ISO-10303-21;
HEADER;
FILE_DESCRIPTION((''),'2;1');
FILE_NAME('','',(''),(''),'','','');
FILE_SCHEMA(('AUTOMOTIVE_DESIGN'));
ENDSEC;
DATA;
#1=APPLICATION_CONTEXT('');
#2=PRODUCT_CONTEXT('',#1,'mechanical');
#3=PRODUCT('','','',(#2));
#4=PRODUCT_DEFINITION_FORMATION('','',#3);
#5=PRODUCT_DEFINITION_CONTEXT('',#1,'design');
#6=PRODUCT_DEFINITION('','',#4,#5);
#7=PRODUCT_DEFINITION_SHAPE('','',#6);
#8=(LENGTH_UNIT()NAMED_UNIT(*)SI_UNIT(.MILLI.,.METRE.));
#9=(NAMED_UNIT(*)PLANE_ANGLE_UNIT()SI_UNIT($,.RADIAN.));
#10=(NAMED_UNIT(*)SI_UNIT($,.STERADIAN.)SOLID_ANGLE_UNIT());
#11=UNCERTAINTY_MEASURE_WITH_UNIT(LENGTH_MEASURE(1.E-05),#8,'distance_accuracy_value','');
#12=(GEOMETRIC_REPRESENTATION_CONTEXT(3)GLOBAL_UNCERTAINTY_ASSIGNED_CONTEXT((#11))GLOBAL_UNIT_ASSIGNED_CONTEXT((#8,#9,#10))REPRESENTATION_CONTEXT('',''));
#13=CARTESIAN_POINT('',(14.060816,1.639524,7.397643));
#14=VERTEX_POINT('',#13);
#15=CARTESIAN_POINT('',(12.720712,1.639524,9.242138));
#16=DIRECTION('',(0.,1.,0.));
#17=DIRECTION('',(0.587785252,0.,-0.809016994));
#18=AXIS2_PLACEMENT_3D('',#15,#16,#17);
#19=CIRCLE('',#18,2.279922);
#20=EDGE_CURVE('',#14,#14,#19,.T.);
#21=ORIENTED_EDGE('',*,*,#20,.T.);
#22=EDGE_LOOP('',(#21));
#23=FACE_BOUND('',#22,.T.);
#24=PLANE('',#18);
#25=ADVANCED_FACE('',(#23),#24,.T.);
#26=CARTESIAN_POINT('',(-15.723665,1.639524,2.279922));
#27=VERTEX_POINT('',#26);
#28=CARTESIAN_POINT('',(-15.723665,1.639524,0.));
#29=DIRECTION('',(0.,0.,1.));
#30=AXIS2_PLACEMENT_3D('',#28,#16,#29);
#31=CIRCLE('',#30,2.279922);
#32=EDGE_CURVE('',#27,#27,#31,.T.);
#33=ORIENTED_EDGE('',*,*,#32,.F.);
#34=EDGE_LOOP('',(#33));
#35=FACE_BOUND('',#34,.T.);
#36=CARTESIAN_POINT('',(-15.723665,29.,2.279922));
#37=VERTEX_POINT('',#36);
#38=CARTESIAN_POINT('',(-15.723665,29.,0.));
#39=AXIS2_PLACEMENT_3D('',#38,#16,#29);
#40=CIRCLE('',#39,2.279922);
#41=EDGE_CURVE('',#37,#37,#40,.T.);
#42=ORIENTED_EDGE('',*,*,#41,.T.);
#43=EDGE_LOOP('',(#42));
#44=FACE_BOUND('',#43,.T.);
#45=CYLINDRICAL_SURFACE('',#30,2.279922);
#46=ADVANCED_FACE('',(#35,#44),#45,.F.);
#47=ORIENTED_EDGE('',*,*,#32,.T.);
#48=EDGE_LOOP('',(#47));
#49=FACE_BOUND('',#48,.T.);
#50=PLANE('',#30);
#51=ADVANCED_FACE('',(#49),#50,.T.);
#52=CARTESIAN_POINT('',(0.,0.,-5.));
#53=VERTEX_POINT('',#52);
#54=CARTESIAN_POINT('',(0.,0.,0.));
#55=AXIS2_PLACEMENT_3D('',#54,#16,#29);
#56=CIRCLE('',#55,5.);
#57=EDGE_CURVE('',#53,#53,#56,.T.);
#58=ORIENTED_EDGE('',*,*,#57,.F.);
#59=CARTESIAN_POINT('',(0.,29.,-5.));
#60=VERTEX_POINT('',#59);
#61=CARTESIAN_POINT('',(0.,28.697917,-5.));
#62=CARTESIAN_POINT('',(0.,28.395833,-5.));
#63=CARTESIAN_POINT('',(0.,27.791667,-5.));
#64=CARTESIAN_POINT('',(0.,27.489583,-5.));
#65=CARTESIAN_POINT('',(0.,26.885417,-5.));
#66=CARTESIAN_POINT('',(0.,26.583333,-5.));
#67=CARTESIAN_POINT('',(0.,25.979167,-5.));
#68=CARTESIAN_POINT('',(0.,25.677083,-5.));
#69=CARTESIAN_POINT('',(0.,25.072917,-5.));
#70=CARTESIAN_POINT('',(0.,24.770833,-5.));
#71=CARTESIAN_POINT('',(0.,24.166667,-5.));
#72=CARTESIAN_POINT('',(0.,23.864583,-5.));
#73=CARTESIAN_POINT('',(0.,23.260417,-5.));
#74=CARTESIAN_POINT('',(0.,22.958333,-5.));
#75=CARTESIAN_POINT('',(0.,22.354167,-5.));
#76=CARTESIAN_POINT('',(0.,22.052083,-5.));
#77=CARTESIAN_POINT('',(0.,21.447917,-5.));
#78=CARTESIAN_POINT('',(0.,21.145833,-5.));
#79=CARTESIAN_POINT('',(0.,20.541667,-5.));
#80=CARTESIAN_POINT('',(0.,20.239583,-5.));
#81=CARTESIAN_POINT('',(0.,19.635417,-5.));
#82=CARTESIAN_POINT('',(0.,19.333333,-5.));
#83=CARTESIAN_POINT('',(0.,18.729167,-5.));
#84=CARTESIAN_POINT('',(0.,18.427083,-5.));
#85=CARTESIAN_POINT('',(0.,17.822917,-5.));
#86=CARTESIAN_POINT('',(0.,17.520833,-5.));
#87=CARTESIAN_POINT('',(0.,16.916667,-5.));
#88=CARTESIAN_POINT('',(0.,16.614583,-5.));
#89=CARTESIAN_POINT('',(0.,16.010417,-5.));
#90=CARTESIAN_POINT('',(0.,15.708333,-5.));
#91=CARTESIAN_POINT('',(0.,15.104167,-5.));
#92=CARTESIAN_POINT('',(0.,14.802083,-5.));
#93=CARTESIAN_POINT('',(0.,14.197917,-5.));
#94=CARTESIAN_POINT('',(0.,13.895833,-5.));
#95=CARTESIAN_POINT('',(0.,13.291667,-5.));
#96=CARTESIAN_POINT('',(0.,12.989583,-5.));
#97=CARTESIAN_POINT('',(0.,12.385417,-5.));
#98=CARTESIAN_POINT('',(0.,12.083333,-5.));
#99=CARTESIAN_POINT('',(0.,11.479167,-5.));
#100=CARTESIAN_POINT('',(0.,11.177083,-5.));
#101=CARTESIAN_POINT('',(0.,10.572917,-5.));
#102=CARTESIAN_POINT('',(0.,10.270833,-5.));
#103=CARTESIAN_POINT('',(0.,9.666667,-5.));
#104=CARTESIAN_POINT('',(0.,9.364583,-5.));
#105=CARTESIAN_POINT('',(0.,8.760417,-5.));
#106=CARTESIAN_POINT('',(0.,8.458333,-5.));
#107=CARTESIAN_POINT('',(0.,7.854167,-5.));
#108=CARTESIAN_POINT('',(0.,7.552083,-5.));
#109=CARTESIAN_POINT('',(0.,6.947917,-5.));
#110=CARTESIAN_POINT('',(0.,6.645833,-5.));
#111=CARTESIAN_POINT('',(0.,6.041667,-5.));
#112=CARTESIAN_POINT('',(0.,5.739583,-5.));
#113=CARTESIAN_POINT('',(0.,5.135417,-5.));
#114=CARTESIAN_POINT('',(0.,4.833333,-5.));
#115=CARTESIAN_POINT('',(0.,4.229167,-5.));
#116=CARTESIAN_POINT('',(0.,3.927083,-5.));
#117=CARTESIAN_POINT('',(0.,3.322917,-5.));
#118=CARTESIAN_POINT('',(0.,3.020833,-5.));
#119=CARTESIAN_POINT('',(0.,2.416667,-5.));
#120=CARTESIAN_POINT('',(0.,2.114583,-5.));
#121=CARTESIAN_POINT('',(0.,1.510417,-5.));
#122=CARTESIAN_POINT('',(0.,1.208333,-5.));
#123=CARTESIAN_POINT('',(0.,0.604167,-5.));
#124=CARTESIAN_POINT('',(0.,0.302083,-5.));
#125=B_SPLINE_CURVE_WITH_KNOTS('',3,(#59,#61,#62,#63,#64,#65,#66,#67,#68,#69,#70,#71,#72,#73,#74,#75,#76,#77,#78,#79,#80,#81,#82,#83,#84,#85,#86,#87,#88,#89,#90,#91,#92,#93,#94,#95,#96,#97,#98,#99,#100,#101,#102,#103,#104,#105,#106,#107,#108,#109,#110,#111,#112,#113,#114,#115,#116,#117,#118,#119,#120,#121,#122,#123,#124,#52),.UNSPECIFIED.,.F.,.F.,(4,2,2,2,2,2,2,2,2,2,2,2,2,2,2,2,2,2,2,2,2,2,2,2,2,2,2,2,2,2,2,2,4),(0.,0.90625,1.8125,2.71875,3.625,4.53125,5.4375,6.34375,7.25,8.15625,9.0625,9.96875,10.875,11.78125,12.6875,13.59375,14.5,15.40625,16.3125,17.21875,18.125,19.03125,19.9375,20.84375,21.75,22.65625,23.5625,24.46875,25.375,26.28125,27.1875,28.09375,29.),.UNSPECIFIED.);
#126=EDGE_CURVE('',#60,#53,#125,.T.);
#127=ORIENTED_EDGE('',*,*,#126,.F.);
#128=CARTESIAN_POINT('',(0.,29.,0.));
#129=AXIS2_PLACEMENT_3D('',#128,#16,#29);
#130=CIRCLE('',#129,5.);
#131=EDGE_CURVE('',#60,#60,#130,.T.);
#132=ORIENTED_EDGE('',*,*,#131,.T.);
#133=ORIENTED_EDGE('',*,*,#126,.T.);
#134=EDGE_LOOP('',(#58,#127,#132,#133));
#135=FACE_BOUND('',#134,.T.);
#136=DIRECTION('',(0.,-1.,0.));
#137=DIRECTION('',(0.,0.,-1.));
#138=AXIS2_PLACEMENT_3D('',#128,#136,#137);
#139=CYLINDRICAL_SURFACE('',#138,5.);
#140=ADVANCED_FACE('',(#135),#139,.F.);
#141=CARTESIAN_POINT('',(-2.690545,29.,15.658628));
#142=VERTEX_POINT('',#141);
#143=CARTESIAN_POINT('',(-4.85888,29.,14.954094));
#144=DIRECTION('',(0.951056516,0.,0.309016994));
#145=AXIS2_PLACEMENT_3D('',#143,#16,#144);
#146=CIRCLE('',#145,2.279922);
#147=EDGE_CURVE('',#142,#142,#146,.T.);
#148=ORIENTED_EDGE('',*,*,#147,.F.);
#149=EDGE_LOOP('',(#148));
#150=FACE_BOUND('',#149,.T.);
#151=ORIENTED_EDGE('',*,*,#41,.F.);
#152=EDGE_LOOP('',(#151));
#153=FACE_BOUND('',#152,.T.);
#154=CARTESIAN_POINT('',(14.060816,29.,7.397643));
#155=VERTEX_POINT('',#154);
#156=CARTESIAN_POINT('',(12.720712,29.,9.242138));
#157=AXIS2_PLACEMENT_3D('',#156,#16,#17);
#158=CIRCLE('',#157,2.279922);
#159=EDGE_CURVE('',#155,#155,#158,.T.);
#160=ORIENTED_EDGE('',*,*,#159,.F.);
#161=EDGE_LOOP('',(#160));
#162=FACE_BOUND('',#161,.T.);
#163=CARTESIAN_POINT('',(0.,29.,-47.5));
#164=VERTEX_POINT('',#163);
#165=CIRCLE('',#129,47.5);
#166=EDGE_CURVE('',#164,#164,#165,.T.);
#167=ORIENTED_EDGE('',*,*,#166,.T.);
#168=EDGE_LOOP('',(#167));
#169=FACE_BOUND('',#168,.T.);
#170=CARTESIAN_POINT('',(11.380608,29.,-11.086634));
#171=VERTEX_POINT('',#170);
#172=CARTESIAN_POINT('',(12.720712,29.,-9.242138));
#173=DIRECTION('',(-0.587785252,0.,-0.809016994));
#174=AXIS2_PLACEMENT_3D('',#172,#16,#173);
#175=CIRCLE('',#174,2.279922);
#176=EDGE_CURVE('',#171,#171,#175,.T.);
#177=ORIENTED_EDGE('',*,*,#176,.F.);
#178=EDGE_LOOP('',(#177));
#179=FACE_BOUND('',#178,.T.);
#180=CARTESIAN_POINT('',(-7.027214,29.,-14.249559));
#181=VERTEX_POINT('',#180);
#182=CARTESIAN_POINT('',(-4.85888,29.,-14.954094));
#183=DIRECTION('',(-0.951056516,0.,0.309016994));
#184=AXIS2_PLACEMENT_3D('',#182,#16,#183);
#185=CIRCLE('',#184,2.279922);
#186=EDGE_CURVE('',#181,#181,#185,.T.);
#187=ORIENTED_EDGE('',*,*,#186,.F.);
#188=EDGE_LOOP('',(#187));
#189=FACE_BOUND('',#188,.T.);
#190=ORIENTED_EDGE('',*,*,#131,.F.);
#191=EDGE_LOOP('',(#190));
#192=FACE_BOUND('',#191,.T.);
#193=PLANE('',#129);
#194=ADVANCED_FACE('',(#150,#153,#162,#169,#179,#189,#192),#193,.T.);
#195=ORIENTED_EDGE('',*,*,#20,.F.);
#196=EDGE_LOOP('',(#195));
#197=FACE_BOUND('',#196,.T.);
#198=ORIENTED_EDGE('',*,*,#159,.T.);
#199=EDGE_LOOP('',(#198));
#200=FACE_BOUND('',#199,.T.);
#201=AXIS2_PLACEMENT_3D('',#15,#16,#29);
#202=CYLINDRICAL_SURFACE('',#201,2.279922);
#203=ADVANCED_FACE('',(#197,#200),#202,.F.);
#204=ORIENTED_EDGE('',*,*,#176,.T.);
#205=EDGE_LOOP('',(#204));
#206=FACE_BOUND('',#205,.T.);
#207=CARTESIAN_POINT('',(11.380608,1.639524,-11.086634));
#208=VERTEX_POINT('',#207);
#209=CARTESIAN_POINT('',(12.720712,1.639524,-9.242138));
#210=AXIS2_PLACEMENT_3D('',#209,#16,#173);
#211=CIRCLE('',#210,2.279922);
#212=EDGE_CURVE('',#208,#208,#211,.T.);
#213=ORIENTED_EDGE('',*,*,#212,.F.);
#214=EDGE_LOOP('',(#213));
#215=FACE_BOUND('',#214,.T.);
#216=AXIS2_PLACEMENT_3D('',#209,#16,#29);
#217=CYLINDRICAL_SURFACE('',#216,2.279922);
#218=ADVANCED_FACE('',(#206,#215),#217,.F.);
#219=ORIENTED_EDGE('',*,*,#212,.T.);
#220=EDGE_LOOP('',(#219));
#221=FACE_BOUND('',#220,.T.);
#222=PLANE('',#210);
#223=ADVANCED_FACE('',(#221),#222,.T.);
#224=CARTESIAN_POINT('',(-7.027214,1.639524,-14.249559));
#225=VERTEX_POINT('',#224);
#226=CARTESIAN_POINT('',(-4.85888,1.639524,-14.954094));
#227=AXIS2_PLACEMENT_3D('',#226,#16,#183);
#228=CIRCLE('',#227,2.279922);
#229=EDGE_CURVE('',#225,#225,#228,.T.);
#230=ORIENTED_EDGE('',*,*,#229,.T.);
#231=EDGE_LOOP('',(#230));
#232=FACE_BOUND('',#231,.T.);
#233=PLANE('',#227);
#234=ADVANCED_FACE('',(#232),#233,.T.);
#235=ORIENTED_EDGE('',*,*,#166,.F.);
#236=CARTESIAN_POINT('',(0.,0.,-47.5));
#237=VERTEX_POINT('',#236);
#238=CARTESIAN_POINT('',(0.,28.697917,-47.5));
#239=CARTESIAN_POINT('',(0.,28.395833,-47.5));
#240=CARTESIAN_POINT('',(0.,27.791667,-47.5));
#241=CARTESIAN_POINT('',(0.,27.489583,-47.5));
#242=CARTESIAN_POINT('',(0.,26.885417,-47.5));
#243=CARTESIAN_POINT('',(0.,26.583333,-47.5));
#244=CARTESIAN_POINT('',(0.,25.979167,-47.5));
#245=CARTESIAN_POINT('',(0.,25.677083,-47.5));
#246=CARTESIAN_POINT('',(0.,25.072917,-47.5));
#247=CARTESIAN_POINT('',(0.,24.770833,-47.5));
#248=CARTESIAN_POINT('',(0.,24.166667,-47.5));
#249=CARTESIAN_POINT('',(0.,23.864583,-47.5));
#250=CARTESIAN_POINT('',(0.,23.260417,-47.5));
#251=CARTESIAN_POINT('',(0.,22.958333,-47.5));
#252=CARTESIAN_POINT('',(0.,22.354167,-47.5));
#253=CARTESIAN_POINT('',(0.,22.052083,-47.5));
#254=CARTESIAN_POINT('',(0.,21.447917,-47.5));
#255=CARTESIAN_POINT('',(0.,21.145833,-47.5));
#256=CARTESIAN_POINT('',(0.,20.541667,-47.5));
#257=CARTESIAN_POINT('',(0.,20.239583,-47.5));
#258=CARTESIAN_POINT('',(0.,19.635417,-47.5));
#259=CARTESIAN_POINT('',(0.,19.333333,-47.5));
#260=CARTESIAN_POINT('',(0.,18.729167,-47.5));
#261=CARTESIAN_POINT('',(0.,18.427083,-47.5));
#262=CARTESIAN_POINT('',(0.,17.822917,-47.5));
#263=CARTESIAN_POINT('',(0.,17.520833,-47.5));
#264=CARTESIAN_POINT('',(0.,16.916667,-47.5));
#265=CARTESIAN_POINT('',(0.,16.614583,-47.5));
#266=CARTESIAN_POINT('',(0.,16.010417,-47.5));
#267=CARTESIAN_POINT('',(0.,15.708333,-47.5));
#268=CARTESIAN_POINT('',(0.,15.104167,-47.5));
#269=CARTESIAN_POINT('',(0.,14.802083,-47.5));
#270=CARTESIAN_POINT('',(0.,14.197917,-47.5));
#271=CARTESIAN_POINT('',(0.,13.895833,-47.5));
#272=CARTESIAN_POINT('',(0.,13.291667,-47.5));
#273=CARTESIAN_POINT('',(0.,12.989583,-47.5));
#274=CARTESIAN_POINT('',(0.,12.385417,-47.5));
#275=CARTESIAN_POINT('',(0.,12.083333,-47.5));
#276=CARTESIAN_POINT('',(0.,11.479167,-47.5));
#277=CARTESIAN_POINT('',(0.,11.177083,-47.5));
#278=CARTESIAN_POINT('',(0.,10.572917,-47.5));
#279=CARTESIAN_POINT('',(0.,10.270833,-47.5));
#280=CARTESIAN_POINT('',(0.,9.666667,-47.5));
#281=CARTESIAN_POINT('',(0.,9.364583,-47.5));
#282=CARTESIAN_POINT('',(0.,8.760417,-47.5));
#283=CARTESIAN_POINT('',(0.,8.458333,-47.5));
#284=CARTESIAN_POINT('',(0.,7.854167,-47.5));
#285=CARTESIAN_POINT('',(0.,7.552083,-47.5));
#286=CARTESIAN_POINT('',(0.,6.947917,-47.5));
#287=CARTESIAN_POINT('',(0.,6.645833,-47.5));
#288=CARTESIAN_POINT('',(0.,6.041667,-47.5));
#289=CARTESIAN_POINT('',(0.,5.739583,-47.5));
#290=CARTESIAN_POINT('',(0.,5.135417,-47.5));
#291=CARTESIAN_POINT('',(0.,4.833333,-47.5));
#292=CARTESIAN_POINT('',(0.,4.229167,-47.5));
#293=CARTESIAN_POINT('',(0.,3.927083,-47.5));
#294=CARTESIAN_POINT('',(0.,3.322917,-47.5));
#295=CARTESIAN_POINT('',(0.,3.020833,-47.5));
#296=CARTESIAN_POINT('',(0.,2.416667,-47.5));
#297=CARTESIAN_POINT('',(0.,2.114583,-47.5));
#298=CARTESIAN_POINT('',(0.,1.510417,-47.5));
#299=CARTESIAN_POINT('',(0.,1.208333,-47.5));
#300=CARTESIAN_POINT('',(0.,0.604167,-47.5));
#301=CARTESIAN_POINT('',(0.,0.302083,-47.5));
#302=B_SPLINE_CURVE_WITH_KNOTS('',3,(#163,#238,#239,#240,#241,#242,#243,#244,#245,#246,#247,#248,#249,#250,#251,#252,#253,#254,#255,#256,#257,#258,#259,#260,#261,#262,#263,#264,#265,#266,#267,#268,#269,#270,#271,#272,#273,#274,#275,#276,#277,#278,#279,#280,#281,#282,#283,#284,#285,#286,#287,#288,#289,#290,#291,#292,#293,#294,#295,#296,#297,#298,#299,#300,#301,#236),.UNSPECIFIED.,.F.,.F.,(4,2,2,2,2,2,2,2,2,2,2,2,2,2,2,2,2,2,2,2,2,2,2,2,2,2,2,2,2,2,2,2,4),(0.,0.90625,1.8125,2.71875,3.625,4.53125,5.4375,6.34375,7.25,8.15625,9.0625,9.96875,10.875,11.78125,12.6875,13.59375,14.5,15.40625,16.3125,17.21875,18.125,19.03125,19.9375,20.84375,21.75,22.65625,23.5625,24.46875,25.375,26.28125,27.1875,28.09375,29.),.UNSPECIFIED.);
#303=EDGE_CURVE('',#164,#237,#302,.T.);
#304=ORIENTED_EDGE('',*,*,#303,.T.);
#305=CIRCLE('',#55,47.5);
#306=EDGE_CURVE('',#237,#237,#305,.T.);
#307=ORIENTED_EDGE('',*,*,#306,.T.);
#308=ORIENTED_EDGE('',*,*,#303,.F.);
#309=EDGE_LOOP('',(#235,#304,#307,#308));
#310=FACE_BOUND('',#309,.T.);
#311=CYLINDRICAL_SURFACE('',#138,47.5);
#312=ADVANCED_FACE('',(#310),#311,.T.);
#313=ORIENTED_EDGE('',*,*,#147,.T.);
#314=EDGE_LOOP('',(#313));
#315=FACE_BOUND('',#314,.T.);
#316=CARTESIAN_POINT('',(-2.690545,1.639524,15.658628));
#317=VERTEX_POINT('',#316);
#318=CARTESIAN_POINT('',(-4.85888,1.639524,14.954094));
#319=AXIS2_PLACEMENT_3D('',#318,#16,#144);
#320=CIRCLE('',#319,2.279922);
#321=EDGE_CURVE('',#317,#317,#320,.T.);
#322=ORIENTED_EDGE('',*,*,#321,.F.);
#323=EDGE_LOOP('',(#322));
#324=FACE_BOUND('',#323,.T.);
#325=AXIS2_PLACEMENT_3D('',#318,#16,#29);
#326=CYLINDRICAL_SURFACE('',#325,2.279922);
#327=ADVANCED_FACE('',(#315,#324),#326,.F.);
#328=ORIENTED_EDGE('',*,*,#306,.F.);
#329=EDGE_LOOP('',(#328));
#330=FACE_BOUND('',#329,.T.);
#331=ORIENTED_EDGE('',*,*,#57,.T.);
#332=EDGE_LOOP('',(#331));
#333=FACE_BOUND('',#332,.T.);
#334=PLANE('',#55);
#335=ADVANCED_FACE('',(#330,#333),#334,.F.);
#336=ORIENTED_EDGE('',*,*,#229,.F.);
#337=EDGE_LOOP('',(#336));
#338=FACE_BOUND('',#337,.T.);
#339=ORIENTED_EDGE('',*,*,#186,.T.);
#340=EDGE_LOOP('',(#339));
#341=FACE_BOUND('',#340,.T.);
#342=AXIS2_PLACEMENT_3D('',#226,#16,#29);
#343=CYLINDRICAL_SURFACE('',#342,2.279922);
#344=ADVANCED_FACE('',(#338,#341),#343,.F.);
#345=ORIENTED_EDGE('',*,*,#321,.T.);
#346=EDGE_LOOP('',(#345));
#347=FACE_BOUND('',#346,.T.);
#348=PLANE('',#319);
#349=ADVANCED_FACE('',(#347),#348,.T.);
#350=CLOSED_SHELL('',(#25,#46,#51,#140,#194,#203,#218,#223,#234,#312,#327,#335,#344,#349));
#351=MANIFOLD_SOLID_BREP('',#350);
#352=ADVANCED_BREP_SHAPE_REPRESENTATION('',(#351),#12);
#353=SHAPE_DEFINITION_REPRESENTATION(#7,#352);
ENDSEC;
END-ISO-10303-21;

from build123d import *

# Parameters (mm, degrees)
SKETCH1_R           = 47.5
BOSS_EXTRUDE1_DEPTH = 29
SKETCH2_R           = 5
CUT_EXTRUDE1_DEPTH  = 74.167615787
SKETCH3_R           = 2.279921831
CUT_EXTRUDE2_DEPTH  = 27.360476295
CIRPATTERN1_COUNT   = 5


with BuildPart() as part:
    # Sketch1 → Boss-Extrude1 (new body)
    with BuildSketch(Plane(origin=(0, 0, 0), x_dir=(1, 0, 0), z_dir=(0, 1, 0))):
        Circle(SKETCH1_R)
    extrude(amount=BOSS_EXTRUDE1_DEPTH)

    # Sketch2 → Cut-Extrude1 (cut, through all)
    with BuildSketch(Plane(origin=(0, 0, 0), x_dir=(1, 0, 0), z_dir=(0, 1, 0))):
        Circle(SKETCH2_R)
    extrude(amount=CUT_EXTRUDE1_DEPTH, mode=Mode.SUBTRACT)

    # Sketch3 → Cut-Extrude2 (cut)
    with BuildSketch(Plane(origin=(0, 29, 0), x_dir=(1, 0, 0), z_dir=(0, 1, 0))):
        with Locations((-15.723664714, 0)):
            Circle(SKETCH3_R)
    cut_extrude2 = extrude(amount=-CUT_EXTRUDE2_DEPTH, mode=Mode.SUBTRACT)

    # CirPattern1: Cut-Extrude2 ×5 about axis
    cirpattern1_axis = Axis((0, 0, 0), (0, 1, 0))
    for i in range(1, CIRPATTERN1_COUNT):
        add(cut_extrude2.rotate(cirpattern1_axis, i * 360 / CIRPATTERN1_COUNT), mode=Mode.SUBTRACT)


solid = part.part
